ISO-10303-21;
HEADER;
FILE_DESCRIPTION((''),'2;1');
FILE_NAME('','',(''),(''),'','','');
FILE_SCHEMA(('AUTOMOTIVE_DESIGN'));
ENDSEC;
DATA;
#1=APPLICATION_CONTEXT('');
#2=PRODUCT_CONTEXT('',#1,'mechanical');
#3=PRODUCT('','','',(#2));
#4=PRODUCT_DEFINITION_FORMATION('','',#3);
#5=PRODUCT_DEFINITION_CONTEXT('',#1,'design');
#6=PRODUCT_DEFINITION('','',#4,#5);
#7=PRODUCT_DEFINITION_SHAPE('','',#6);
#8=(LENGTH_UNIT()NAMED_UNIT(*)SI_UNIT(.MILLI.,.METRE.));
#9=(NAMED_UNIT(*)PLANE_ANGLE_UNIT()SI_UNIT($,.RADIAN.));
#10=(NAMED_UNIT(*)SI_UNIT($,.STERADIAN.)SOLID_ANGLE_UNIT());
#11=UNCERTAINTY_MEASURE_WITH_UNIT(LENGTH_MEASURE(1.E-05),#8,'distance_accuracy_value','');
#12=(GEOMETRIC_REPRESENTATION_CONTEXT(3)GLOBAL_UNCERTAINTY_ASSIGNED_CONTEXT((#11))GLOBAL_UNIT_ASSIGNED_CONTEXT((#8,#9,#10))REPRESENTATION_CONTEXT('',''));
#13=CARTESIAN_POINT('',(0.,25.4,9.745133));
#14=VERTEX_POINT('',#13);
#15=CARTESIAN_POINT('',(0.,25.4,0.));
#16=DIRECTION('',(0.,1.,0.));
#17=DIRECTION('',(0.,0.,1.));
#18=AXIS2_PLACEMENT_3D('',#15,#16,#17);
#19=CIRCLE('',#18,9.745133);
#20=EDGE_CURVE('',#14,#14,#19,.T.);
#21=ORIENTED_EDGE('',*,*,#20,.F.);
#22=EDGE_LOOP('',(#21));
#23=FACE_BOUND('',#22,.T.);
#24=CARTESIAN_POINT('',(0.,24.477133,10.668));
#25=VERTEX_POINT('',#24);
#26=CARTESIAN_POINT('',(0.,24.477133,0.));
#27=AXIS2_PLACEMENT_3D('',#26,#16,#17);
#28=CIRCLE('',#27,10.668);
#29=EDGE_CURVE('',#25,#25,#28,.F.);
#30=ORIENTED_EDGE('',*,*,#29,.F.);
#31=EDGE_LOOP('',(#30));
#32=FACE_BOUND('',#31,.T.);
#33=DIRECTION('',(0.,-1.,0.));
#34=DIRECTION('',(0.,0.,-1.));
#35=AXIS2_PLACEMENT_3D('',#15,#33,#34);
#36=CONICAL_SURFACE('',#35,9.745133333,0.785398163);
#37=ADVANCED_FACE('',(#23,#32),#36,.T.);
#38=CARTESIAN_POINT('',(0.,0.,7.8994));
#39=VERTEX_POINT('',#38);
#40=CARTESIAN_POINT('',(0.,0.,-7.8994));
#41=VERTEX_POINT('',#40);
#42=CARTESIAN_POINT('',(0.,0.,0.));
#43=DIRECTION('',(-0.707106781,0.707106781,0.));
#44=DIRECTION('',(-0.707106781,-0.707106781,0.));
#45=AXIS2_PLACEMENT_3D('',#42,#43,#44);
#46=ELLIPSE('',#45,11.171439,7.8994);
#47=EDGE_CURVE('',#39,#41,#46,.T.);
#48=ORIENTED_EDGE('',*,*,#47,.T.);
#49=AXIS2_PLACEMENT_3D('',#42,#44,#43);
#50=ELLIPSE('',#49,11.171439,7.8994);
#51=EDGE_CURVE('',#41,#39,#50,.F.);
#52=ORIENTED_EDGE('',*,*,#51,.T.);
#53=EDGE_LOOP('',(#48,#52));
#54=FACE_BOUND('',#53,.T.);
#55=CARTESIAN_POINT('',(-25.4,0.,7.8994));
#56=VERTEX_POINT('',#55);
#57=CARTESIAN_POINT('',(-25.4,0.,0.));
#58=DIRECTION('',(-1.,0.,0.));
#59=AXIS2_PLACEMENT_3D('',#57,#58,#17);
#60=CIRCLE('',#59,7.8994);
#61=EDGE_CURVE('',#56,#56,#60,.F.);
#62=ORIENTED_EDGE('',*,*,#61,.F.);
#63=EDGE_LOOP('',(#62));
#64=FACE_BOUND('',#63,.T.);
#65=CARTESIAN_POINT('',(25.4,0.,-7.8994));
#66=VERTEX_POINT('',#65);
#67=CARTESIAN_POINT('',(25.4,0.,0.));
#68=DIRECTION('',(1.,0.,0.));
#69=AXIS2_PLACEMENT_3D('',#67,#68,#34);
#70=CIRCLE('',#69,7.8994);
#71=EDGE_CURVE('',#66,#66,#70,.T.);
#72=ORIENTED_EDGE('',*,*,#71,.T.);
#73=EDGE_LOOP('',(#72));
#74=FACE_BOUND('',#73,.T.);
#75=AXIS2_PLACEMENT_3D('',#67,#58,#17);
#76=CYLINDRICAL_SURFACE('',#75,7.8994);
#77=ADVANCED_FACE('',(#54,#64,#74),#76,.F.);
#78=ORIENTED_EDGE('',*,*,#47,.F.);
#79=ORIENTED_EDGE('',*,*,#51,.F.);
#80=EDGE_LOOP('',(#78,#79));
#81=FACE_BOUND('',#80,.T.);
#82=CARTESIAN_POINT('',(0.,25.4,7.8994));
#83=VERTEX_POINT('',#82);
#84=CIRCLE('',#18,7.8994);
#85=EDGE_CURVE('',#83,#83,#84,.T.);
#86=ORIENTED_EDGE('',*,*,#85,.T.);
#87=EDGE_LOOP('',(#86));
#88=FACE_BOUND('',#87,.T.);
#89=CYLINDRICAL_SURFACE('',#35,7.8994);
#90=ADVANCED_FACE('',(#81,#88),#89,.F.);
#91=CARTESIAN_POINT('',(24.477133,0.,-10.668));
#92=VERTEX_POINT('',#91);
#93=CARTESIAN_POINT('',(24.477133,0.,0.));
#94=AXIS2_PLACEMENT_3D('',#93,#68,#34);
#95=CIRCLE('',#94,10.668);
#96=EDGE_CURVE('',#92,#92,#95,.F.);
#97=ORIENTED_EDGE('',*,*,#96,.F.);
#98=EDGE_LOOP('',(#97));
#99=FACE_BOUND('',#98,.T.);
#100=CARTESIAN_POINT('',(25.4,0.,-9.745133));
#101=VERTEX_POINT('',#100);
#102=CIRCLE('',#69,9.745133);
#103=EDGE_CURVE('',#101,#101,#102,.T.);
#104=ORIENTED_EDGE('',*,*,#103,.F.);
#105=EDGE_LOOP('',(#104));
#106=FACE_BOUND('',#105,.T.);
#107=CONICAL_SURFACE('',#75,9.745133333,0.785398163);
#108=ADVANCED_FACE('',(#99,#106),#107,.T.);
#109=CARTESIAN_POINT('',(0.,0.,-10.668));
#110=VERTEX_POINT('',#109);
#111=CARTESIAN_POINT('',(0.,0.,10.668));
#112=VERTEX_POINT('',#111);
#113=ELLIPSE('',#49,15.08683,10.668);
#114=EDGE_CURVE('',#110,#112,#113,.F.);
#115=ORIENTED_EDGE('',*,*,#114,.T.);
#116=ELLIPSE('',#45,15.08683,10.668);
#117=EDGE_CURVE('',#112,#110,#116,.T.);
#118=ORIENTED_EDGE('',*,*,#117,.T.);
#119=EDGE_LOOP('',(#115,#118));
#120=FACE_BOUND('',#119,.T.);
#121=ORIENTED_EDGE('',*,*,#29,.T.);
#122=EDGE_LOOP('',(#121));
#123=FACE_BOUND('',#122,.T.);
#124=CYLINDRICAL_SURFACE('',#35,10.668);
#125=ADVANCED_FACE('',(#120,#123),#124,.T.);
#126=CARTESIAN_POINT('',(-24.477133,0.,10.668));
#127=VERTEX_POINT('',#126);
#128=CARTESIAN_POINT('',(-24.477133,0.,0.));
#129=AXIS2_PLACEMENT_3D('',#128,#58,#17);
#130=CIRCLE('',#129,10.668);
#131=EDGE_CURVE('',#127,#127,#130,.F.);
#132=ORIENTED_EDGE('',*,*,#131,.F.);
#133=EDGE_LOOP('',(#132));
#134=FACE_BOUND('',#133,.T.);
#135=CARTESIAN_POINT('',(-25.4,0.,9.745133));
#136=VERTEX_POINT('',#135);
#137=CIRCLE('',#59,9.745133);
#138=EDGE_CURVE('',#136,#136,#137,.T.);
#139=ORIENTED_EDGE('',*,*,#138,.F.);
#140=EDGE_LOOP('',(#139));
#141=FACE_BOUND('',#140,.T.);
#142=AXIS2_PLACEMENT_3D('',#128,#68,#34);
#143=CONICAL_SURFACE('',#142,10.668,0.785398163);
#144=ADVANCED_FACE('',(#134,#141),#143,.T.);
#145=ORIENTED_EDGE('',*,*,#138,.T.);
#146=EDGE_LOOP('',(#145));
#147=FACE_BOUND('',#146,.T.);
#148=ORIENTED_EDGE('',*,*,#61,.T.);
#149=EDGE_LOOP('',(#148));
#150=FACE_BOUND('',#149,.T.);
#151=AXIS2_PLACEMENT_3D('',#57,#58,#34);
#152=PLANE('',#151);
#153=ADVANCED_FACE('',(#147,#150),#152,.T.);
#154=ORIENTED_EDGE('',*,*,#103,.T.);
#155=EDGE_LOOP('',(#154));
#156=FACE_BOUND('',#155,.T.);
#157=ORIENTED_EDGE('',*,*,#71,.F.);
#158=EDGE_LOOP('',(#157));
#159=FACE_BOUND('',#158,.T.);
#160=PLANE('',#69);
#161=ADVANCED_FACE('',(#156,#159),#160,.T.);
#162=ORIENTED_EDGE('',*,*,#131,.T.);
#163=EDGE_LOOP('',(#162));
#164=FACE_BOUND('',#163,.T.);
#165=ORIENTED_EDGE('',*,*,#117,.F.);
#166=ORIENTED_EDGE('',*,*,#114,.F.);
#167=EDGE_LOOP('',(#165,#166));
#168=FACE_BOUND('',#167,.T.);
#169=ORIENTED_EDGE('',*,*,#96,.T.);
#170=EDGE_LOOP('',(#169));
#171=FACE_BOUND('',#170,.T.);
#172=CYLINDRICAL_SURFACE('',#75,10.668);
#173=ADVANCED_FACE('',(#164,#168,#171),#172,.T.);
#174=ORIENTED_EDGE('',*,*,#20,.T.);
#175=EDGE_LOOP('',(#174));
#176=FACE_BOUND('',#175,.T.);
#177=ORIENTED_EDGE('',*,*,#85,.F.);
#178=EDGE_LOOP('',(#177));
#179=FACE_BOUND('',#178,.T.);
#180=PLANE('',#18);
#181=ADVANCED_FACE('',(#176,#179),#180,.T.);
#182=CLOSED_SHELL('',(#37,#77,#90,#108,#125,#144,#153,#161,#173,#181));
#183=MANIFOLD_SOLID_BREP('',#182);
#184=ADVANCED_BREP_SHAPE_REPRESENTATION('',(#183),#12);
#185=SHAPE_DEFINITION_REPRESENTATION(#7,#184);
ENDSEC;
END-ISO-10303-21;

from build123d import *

# Parameters (mm, degrees)
RUNROUTE_R           = 10.668
RUNEXTRUDE_DEPTH     = 25.4
OUTLETROUTE_R        = 10.668
OUTLETEXTRUDE_DEPTH  = 25.4
TEESHELL_START       = -25.4
TEESHELL_OUTLINE_R   = 7.8994
TEESHELL_DEPTH       = 50.8
TEESHELL_START_2     = -1e-07
TEESHELL_2_OUTLINE_R = 7.8994
TEESHELL_2_DEPTH     = 25.4000001
TEECHAMFER_SIZE      = 0.922866667


with BuildPart() as part:
    # RunRoute → RunExtrude (new body)
    with BuildSketch(Plane(origin=(0, 0, 0), x_dir=(0, 0, -1), z_dir=(1, 0, 0))):
        Circle(RUNROUTE_R)
    runextrude = extrude(amount=RUNEXTRUDE_DEPTH)

    # RunExtrudeMirror: RunExtrude across plane
    add(runextrude.mirror(Plane(origin=(0, 0, 0), x_dir=(0, 0, 1), z_dir=(1, 0, 0))))

    # OutletRoute → OutletExtrude (add)
    with BuildSketch(Plane(origin=(0, 0, 0), x_dir=(1, 0, 0), z_dir=(0, 1, 0))):
        with Locations(Location((0, 0, 0), (0, 0, 270))):
            Circle(OUTLETROUTE_R)
    extrude(amount=OUTLETEXTRUDE_DEPTH)

    # TeeShell: read off the stored shape, not the designer's step
    # TeeShell outline → TeeShell (cut)
    with BuildSketch(Plane.YZ.offset(TEESHELL_START)):
        Circle(TEESHELL_OUTLINE_R)
    extrude(amount=TEESHELL_DEPTH, mode=Mode.SUBTRACT)

    # TeeShell 2 outline → TeeShell 2 (cut)
    with BuildSketch(Plane(origin=(0, 0, 0), x_dir=(1, 0, 0), z_dir=(0, 1, 0)).offset(TEESHELL_START_2)):
        Circle(TEESHELL_2_OUTLINE_R)
    extrude(amount=TEESHELL_2_DEPTH, mode=Mode.SUBTRACT)

    # TeeChamfer
    # the kernel refuses this chamfer: 0.922866667 mm, written as the material it takes off along each edge
    with BuildSketch(Plane(origin=(25.4, 0, 0), x_dir=(0, 0, -1), z_dir=(0, -1, 0))) as teechamfer_piece_1:
        Polygon((10.668, -TEECHAMFER_SIZE), (10.668 - TEECHAMFER_SIZE, 0), (10.668, 0), align=None)
    revolve(axis=Axis((25.4, 0, 0), (1, 0, 0)), mode=Mode.SUBTRACT)
    with BuildSketch(Plane(origin=(-25.4, 0, 0), x_dir=(0, 0, -1), z_dir=(0, -1, 0))) as teechamfer_piece_2:
        Polygon((10.668, TEECHAMFER_SIZE), (10.668 - TEECHAMFER_SIZE, 0), (10.668, 0), align=None)
    revolve(axis=Axis((-25.4, 0, 0), (1, 0, 0)), mode=Mode.SUBTRACT)
    with BuildSketch(Plane(origin=(0, 25.4, 0), x_dir=(0, 0, 1), z_dir=(-1, 0, 0))) as teechamfer_piece_3:
        Polygon((10.668, -TEECHAMFER_SIZE), (10.668 - TEECHAMFER_SIZE, 0), (10.668, 0), align=None)
    revolve(axis=Axis((0, 25.4, 0), (0, 1, 0)), mode=Mode.SUBTRACT)


solid = part.part
